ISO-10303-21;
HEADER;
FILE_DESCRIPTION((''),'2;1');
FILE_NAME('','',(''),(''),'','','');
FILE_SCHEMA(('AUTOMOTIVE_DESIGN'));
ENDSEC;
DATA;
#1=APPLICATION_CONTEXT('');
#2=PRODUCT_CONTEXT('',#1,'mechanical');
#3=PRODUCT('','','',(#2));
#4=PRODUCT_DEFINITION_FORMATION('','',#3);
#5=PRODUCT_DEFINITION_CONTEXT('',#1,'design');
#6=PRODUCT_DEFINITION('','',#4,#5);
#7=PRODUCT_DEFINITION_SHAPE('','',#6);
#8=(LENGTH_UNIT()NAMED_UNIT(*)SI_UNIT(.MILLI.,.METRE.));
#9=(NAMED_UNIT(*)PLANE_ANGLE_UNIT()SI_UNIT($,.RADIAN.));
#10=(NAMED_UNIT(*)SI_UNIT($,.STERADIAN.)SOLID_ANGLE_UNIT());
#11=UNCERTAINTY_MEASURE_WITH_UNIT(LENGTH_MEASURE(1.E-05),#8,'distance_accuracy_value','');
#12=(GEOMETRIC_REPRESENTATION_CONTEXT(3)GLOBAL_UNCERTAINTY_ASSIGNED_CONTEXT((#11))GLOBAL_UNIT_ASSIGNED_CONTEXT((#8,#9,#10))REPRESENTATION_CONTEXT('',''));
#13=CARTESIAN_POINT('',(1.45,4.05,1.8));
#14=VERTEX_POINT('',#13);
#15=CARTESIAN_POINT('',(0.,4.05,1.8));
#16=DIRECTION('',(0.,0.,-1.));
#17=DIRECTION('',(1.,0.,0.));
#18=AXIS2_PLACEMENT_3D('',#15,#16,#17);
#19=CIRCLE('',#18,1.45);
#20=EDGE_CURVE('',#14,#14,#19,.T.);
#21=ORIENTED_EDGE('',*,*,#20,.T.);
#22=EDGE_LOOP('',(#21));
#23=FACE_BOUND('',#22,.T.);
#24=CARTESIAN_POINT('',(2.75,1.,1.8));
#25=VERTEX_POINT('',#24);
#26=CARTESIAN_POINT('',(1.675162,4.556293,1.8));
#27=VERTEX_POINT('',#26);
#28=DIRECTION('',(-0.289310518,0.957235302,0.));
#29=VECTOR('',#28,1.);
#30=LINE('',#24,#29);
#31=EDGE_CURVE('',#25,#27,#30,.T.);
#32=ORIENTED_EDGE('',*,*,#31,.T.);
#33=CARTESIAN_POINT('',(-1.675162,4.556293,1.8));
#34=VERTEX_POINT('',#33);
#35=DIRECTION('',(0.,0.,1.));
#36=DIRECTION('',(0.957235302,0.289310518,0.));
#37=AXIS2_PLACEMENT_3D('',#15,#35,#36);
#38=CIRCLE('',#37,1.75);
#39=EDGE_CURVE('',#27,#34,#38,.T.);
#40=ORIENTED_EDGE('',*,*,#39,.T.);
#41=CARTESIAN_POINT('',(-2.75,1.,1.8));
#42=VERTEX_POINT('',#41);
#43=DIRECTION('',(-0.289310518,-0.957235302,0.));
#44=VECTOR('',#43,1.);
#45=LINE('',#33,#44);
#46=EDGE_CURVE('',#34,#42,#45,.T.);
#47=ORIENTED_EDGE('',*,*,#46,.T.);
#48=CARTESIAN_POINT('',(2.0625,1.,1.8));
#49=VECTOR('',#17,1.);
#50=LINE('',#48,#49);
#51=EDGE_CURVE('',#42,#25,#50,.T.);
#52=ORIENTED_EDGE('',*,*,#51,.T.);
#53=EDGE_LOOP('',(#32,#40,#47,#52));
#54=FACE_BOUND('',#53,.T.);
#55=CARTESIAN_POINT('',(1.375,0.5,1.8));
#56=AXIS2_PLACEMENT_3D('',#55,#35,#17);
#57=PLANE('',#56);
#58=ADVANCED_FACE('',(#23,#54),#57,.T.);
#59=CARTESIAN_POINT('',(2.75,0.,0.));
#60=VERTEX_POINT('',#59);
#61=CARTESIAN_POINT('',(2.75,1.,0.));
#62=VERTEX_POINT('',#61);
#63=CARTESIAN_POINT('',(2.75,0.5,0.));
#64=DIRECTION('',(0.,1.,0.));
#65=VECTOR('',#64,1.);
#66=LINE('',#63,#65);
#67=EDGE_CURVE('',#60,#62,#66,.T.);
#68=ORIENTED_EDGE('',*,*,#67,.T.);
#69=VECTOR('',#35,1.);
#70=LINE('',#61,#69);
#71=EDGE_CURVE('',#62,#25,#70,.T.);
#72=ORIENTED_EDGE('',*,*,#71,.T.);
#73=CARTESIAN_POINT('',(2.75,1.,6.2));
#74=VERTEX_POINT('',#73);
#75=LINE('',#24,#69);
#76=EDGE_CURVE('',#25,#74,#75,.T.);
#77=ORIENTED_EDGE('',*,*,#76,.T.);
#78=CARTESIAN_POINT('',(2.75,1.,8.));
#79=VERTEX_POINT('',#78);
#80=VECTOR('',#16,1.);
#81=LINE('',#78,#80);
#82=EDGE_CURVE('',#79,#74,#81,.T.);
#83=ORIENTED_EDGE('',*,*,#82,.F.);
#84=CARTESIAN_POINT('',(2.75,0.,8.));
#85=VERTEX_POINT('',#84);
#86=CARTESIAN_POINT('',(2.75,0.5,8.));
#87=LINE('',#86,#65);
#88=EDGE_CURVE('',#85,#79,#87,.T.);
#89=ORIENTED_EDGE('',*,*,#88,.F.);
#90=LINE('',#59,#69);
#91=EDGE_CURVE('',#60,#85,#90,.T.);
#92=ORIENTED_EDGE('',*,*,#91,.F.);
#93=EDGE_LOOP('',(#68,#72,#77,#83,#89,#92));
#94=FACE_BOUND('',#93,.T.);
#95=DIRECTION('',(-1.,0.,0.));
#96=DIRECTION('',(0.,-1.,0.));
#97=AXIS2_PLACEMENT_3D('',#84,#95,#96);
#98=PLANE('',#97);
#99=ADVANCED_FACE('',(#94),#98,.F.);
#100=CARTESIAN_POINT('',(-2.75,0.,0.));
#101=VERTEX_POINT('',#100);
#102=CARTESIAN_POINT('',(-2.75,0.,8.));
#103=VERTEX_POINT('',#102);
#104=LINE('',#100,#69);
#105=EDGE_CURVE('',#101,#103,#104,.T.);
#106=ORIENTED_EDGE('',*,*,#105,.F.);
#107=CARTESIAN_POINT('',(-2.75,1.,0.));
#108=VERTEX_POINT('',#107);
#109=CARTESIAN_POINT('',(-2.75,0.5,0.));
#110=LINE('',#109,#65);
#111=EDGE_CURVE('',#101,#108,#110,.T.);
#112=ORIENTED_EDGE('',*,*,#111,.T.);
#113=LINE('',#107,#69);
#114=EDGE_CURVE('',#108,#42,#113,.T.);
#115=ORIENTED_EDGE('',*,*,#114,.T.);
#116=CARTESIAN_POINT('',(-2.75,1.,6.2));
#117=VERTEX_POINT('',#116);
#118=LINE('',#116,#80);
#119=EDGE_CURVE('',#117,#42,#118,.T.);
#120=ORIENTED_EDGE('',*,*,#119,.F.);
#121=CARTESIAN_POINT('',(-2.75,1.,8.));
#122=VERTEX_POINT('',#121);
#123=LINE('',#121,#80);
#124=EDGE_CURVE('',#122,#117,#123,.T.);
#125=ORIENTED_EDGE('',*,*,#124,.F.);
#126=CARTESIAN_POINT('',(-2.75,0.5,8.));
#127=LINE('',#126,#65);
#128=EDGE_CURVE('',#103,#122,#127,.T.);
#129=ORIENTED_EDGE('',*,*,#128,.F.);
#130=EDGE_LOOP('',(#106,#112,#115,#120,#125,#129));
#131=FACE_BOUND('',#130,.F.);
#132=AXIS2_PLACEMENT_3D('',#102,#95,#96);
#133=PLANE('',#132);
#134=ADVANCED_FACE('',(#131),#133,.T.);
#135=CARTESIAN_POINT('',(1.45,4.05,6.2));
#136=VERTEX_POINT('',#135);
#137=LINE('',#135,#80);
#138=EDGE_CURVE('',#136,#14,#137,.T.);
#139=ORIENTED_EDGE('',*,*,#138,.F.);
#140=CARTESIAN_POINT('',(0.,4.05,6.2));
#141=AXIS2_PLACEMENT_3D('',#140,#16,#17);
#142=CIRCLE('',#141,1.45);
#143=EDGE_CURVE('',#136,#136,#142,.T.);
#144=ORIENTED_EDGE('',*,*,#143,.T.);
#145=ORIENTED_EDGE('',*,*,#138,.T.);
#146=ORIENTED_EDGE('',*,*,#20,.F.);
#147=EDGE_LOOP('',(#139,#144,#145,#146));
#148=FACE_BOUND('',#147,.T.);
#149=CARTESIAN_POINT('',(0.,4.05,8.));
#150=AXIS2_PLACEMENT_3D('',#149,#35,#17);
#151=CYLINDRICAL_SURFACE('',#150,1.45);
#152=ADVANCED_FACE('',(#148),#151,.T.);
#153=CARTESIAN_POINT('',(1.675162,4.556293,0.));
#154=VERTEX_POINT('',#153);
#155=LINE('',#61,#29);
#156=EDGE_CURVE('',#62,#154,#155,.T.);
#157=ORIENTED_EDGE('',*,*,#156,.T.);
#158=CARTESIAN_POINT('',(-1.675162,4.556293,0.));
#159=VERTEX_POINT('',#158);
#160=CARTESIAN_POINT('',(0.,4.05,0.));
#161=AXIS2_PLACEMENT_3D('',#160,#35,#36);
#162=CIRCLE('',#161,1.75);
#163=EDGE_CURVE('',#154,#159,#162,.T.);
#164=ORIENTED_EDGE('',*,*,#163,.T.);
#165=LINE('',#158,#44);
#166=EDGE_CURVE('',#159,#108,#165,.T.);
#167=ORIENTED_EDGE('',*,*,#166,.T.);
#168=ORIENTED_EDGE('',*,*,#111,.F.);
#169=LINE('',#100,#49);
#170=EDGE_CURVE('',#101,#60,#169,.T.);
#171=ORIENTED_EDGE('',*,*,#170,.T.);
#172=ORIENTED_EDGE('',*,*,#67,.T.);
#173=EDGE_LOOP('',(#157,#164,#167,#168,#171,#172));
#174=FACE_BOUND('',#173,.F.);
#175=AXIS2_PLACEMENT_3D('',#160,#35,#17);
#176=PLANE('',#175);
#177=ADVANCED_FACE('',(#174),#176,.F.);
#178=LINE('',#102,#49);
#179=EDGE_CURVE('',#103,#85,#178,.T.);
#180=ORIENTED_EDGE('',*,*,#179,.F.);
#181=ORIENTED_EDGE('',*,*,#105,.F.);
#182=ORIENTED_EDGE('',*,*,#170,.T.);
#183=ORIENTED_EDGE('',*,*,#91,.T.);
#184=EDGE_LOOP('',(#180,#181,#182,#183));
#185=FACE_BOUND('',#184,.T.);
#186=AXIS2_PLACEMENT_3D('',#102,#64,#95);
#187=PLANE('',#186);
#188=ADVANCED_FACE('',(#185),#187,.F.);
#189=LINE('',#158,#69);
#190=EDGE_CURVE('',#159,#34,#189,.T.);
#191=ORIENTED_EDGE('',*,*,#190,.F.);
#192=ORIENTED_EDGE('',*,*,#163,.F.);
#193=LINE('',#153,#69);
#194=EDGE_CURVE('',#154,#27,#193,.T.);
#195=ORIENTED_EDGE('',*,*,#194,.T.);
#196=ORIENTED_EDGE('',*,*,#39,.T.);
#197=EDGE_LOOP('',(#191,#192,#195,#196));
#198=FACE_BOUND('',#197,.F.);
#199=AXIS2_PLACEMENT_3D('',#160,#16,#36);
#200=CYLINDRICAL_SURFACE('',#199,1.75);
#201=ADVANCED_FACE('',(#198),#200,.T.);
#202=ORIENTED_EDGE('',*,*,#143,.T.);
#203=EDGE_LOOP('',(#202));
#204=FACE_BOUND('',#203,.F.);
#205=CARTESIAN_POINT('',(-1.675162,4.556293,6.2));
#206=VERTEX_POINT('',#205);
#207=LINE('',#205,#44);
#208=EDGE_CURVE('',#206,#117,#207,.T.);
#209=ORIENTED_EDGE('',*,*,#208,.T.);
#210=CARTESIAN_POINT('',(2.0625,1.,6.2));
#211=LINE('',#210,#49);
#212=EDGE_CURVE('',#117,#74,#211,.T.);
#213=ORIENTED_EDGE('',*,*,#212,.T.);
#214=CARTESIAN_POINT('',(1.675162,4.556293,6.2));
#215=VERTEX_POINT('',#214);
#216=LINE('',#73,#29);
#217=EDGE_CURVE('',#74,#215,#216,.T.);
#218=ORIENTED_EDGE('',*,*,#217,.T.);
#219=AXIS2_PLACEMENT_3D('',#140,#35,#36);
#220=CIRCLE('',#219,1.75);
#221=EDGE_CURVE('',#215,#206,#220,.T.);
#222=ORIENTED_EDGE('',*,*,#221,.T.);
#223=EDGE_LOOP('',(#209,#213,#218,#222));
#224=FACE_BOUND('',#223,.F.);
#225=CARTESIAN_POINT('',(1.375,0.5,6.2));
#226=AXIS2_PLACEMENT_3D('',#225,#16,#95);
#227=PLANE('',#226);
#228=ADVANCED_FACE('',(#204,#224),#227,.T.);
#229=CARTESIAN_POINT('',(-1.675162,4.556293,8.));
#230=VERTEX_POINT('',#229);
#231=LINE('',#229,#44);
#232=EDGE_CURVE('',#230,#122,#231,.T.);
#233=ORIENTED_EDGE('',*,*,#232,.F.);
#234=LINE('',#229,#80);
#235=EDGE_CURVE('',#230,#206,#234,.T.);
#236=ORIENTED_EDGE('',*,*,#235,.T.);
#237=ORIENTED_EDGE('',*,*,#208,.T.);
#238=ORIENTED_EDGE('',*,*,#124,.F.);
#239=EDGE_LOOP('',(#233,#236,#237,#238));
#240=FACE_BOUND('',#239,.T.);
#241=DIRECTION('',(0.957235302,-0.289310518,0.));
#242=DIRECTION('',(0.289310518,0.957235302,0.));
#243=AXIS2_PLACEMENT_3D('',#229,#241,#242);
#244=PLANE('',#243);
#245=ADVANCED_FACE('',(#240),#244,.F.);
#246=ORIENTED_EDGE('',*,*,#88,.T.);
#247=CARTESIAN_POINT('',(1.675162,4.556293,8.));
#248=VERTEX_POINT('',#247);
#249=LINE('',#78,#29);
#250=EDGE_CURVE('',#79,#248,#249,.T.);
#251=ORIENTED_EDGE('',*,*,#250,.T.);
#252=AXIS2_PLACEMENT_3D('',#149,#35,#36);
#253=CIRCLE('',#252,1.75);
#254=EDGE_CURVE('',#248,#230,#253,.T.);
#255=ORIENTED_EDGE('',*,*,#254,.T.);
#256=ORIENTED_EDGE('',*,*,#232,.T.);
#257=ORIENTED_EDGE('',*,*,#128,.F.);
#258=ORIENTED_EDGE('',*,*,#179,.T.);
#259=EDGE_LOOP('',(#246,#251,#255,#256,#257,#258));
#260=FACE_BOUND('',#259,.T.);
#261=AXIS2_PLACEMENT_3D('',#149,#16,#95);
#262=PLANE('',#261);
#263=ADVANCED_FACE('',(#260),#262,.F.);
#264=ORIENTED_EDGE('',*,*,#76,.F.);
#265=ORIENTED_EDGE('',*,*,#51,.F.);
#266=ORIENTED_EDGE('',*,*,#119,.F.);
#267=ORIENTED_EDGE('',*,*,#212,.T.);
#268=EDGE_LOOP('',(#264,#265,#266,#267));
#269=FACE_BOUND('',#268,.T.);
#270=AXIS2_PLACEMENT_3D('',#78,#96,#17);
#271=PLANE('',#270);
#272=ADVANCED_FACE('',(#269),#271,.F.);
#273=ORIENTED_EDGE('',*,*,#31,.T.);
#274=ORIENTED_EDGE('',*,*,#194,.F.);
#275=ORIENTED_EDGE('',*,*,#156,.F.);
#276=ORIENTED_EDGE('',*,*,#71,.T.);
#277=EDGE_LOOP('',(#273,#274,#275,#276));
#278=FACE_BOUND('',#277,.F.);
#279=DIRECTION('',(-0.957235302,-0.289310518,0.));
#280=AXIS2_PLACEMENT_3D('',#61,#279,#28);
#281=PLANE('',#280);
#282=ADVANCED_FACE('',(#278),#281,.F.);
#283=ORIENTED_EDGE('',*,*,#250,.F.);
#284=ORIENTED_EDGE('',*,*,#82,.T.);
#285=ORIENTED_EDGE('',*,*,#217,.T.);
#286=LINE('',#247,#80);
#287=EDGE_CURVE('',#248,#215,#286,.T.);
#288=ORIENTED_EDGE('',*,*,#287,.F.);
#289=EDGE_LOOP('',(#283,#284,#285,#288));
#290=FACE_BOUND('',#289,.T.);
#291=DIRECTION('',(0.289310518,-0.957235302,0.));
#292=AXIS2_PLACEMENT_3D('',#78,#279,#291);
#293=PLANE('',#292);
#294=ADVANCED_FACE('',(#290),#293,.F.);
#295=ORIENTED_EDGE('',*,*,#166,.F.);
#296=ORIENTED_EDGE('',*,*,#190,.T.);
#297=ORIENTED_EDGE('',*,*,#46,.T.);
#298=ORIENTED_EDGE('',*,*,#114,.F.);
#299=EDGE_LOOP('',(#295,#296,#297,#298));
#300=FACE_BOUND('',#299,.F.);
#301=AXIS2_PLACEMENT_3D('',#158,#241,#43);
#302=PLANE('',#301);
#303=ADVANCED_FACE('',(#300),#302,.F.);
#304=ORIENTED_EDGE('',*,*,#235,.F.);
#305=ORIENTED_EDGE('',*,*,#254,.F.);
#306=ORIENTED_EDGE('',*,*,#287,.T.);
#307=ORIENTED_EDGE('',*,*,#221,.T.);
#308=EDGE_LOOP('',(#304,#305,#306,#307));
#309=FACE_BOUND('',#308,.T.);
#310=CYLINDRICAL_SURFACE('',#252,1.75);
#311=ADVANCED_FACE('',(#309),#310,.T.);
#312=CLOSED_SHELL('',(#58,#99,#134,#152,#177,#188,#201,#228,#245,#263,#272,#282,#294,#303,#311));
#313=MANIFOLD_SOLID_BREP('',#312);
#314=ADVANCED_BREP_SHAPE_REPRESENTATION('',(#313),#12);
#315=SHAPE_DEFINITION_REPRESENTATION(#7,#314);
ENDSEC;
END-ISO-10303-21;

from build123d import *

# Parameters (mm, degrees)
F0_W     = 2.75
F0_H     = 1
F0_R     = 1.45
F1_DEPTH = 1.8
F2_DEPTH = 4


# Not quite as in the source:
# - a feature of the source that left no trace in its solid (it failed there, or was rolled back) is left out


with BuildPart() as f1:
    # F0 (on Top) → F1 (new body)
    with BuildSketch(Plane.XY):
        with Locations((1.375, 0.5)):
            Rectangle(F0_W, F0_H)
        with Locations((-1.375, 0.5)):
            Rectangle(F0_W, F0_H)
        with BuildLine():
            Line((0, 2.3), (0, 1))
            Line((0, 1), (2.75, 1))
            Line((2.75, 1), (1.675161779, 4.5562934073))
            ThreePointArc((1.675161779, 4.5562934073), (1.7311893474, 4.3058973298), (1.75, 4.05))
            ThreePointArc((1.75, 4.05), (1.2374368671, 2.8125631329), (0, 2.3))
        make_face()
        with BuildLine():
            Line((-2.75, 1), (0, 1))
            Line((0, 1), (0, 2.3))
            ThreePointArc((0, 2.3), (-1.4050824643, 3.0068110101), (-1.675161779, 4.5562934073))
            Line((-1.675161779, 4.5562934073), (-2.75, 1))
        make_face()
        with BuildLine():
            ThreePointArc((-1.675161779, 4.5562934073), (-1.4050824643, 3.0068110101), (0, 2.3))
            ThreePointArc((0, 2.3), (1.2374368671, 2.8125631329), (1.75, 4.05))
            ThreePointArc((1.75, 4.05), (1.7311893474, 4.3058973298), (1.675161779, 4.5562934073))
            ThreePointArc((1.675161779, 4.5562934073), (0, 5.8), (-1.675161779, 4.5562934073))
        make_face()
        with Locations((0, 4.05)):
            Circle(F0_R, mode=Mode.SUBTRACT)
        with Locations((0, 4.05)):
            Circle(F0_R)
    extrude(amount=F1_DEPTH)

    # F0 (on Top) → F2 (join)
    with BuildSketch(Plane.XY):
        with Locations((0, 4.05)):
            Circle(F0_R)
        with Locations((-1.375, 0.5)):
            Rectangle(F0_W, F0_H)
        with Locations((1.375, 0.5)):
            Rectangle(F0_W, F0_H)
    extrude(amount=F2_DEPTH)

    # F4: F1 across plane


with BuildPart() as f1_1:
    add(f1.part)
    add(f1.part.mirror(Plane.XY.offset(4)))


solid = f1_1.part
